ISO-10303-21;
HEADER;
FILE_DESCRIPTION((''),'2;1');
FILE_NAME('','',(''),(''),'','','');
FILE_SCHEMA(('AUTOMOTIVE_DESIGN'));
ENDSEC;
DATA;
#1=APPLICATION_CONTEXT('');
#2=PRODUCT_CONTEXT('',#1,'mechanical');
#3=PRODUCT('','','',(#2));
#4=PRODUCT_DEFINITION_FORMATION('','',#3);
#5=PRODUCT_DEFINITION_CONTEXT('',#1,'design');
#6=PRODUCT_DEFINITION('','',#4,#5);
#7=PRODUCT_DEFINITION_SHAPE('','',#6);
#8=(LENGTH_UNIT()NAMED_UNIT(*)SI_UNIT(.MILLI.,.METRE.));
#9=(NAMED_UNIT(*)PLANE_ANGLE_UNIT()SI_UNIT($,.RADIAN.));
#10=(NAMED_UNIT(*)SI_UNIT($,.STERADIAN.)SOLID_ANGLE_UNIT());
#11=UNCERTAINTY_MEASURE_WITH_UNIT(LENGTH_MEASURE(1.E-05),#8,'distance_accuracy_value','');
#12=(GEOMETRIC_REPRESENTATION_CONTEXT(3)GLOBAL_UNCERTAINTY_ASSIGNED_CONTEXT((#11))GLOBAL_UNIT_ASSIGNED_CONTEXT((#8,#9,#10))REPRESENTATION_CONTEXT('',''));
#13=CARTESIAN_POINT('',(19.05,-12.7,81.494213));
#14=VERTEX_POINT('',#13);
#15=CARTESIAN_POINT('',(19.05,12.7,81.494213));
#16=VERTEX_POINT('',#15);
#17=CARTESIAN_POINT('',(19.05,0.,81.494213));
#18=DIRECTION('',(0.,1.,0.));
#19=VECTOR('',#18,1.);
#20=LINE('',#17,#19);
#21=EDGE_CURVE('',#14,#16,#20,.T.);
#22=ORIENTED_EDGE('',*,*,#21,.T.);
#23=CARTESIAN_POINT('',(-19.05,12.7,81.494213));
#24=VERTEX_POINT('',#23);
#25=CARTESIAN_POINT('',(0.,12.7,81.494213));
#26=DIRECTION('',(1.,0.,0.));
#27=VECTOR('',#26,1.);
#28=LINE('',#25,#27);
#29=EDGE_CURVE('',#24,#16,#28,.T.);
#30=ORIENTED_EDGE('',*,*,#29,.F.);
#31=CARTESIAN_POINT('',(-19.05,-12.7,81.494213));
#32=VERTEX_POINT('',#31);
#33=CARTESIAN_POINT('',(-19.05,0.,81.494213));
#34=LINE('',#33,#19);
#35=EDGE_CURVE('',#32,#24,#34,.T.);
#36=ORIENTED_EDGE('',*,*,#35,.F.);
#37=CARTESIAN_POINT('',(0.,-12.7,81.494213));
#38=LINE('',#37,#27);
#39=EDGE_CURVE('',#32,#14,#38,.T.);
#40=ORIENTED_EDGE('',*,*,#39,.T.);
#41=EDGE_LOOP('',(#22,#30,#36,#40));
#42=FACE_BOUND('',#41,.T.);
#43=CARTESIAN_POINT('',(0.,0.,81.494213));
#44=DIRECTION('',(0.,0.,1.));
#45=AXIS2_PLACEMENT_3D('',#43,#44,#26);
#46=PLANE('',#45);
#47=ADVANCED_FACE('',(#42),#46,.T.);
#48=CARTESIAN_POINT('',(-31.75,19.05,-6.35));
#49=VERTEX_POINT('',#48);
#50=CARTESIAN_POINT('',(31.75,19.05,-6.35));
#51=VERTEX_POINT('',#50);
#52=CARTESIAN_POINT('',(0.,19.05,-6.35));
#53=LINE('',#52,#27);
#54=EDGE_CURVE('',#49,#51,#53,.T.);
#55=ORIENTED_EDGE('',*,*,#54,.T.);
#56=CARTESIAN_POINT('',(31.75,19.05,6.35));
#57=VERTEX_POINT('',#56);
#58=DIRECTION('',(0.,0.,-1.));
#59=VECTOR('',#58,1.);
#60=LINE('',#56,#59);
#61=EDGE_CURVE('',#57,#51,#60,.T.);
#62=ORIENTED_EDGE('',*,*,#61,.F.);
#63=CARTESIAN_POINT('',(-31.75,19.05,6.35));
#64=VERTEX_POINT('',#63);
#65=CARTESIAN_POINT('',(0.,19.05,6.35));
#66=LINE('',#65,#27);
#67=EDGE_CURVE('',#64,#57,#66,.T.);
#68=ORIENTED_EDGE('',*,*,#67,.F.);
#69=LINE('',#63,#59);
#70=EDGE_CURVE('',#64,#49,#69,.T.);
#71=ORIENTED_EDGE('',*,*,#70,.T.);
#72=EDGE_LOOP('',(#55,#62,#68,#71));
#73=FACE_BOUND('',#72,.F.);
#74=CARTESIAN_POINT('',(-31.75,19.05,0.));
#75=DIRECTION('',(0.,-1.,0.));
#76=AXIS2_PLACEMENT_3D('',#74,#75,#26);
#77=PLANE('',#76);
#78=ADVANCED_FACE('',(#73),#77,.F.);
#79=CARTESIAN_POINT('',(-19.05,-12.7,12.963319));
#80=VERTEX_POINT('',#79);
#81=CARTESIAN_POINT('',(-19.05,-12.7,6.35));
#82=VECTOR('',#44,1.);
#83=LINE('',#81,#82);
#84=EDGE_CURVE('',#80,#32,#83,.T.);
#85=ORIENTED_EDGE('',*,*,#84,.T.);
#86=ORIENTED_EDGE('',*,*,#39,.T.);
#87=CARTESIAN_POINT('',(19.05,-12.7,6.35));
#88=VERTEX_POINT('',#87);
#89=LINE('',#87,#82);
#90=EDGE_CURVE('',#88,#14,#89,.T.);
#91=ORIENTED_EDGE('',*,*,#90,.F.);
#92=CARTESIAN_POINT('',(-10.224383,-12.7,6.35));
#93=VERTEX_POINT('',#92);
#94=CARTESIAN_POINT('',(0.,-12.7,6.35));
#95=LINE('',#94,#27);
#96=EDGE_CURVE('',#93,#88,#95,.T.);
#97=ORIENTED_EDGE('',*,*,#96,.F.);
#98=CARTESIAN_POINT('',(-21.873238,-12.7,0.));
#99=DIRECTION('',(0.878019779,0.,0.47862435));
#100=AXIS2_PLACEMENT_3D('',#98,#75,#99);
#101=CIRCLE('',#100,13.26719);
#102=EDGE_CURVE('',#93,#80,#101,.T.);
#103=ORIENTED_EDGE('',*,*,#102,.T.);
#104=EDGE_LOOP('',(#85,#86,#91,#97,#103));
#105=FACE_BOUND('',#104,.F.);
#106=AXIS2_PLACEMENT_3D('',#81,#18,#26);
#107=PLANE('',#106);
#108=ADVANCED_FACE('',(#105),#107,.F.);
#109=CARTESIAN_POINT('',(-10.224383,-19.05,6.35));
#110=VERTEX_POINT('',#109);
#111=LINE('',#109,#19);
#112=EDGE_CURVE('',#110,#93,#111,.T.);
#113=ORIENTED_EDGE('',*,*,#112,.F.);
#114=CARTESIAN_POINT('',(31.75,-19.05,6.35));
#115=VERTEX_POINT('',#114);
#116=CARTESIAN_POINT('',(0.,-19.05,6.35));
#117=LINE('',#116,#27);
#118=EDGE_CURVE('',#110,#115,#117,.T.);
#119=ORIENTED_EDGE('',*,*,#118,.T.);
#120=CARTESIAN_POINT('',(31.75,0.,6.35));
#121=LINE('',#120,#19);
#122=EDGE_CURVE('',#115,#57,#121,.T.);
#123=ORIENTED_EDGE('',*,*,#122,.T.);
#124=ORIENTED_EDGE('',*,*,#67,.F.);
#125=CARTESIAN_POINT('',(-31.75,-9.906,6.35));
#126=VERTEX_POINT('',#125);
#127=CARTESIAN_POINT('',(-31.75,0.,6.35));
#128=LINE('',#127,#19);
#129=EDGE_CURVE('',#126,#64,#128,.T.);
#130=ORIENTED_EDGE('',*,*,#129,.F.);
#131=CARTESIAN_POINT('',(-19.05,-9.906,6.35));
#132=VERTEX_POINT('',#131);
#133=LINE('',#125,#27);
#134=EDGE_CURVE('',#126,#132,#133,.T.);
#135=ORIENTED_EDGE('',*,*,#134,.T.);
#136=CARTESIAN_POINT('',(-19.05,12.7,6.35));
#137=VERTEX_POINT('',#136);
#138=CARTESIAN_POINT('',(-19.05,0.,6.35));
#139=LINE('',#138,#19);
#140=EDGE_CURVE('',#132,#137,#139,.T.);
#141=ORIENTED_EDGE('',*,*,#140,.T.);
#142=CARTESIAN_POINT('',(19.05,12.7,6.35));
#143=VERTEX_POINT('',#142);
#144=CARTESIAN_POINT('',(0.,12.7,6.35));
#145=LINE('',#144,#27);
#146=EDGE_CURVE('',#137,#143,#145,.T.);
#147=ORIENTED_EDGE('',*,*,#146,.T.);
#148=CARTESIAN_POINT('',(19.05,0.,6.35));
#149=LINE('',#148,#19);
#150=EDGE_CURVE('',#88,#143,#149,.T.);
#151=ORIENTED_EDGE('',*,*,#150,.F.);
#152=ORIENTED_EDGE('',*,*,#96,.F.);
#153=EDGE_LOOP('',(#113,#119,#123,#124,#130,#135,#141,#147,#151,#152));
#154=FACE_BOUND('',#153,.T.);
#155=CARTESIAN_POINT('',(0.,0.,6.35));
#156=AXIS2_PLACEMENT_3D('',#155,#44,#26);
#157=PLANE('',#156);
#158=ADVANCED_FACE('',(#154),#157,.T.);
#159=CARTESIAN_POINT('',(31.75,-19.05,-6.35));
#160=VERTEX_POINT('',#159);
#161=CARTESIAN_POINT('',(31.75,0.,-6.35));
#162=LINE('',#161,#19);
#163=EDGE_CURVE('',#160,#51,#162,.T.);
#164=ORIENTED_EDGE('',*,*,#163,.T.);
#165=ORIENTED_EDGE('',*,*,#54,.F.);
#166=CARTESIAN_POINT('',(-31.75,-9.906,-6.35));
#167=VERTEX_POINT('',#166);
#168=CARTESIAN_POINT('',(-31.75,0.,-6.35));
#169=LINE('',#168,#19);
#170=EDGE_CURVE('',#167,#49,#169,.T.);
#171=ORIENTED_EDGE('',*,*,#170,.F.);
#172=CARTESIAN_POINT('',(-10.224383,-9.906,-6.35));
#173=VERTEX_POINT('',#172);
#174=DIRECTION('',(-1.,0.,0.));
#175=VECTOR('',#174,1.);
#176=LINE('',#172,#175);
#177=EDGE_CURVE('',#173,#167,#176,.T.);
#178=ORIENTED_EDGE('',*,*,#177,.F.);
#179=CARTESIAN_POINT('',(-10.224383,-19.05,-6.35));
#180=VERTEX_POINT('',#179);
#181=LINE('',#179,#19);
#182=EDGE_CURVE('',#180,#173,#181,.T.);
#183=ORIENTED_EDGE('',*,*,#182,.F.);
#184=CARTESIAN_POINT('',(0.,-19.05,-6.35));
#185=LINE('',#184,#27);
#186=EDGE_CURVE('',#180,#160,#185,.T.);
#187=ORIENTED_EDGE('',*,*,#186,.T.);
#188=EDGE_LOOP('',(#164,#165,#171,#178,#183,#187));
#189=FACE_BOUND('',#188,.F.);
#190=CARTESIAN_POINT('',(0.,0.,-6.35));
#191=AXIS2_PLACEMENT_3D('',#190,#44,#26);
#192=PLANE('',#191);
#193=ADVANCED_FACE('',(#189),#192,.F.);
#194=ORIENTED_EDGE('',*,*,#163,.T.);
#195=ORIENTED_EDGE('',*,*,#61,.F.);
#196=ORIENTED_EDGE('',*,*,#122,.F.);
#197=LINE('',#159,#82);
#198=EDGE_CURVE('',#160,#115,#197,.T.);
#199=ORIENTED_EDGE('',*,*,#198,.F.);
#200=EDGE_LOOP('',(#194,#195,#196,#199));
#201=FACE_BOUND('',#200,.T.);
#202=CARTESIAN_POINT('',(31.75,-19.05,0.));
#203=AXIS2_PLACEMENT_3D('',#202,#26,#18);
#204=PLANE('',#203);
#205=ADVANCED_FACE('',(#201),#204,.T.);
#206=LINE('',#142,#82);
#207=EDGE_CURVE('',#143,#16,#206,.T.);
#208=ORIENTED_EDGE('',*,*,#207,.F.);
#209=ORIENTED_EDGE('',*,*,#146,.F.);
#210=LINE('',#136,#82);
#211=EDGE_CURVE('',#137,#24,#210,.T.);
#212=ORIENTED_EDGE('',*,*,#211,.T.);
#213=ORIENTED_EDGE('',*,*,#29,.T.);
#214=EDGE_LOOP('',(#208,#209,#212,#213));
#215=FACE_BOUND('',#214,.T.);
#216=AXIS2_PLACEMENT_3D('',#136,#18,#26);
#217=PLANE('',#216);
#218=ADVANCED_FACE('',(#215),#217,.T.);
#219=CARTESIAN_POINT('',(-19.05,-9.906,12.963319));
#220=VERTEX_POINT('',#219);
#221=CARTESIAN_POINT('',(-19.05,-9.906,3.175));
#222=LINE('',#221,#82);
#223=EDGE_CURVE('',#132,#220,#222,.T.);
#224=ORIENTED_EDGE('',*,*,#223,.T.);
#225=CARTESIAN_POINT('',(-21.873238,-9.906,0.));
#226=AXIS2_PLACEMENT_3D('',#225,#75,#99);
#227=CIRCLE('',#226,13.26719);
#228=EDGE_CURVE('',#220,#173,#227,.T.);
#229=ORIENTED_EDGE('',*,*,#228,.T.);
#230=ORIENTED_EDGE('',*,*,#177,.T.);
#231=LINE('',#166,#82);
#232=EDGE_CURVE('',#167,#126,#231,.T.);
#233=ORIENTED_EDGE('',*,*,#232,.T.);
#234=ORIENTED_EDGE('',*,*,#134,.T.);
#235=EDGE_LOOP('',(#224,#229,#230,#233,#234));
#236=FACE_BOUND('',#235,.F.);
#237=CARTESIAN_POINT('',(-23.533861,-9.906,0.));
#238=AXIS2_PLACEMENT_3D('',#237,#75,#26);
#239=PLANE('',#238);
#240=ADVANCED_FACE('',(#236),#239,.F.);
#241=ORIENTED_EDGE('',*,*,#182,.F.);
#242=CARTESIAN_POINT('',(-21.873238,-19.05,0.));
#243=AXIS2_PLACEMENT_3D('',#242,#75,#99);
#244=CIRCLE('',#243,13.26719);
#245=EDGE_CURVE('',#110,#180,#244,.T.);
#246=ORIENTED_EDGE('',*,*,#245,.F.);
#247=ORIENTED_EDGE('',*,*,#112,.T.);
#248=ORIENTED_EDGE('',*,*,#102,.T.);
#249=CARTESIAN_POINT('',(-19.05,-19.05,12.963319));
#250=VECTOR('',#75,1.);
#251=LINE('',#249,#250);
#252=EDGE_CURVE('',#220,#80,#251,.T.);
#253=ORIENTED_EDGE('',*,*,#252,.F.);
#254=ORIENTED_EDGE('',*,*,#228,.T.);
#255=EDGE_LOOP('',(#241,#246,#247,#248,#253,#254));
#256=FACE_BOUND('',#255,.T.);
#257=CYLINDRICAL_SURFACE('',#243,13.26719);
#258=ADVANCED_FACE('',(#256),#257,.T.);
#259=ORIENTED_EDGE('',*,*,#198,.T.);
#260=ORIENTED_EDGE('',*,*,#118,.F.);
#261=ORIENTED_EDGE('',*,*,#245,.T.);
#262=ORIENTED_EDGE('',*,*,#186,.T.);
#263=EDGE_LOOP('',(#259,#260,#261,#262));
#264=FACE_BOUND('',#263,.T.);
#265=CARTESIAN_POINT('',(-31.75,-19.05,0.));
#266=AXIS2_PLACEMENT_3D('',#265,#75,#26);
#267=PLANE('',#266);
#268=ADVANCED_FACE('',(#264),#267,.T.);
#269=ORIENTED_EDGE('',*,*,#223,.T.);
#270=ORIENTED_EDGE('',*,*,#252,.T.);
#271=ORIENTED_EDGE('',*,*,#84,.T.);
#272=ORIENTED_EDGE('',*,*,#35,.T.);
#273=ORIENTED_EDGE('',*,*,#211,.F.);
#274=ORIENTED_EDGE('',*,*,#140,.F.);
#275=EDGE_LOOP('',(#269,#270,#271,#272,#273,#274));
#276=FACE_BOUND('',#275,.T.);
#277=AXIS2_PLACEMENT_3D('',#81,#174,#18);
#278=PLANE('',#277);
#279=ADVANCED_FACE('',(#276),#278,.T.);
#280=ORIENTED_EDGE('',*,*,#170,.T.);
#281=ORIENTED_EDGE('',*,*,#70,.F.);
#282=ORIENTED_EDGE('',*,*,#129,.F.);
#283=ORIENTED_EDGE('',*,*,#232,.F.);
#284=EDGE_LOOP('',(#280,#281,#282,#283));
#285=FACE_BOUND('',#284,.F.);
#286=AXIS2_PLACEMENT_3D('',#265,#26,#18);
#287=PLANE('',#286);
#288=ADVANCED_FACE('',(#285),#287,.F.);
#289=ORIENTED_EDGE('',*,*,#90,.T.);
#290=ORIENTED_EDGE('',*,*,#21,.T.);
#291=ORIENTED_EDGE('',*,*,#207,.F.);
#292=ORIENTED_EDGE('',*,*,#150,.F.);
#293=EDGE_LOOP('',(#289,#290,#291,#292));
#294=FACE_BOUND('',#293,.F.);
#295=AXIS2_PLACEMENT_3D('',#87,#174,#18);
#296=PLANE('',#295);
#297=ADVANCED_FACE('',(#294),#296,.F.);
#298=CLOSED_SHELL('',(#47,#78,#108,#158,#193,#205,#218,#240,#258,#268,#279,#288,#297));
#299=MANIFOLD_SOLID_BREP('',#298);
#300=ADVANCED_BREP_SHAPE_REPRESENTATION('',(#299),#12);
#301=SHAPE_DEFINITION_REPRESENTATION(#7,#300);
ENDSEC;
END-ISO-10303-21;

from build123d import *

# Parameters (mm, degrees)
F0_W     = 63.5
F0_H     = 38.1
F1_DEPTH = 6.35
F2_W     = 38.1
F2_H     = 25.4
F3_DEPTH = 75.1442132
F5_DEPTH = 9.144


# Not quite as in the source:
# - an extrude ends at something that could not be found from the text; its depth is read off the source's solid


with BuildPart() as f1:
    # F0 (on Top) → F1 (new body, symmetric)
    with BuildSketch(Plane.XY):
        Rectangle(F0_W, F0_H)
    extrude(amount=F1_DEPTH, both=True)

    # F2 (on face) → F3 (join, through all)
    with BuildSketch(Plane.XY.offset(6.35)):
        Rectangle(F2_W, F2_H)
    extrude(amount=F3_DEPTH)

    # F4 (on face) → F5 (join)
    with BuildSketch(Plane.XZ.offset(19.05)):
        with BuildLine():
            Line((-31.75, 6.35), (-10.2243826786, 6.35))
            ThreePointArc((-10.2243826786, 6.35), (-35.1404271759, 0), (-10.2243826786, -6.35))
            Line((-10.2243826786, -6.35), (-31.75, -6.35))
            Line((-31.75, -6.35), (-31.75, 6.35))
        make_face()
    extrude(amount=-F5_DEPTH)


solid = f1.part
